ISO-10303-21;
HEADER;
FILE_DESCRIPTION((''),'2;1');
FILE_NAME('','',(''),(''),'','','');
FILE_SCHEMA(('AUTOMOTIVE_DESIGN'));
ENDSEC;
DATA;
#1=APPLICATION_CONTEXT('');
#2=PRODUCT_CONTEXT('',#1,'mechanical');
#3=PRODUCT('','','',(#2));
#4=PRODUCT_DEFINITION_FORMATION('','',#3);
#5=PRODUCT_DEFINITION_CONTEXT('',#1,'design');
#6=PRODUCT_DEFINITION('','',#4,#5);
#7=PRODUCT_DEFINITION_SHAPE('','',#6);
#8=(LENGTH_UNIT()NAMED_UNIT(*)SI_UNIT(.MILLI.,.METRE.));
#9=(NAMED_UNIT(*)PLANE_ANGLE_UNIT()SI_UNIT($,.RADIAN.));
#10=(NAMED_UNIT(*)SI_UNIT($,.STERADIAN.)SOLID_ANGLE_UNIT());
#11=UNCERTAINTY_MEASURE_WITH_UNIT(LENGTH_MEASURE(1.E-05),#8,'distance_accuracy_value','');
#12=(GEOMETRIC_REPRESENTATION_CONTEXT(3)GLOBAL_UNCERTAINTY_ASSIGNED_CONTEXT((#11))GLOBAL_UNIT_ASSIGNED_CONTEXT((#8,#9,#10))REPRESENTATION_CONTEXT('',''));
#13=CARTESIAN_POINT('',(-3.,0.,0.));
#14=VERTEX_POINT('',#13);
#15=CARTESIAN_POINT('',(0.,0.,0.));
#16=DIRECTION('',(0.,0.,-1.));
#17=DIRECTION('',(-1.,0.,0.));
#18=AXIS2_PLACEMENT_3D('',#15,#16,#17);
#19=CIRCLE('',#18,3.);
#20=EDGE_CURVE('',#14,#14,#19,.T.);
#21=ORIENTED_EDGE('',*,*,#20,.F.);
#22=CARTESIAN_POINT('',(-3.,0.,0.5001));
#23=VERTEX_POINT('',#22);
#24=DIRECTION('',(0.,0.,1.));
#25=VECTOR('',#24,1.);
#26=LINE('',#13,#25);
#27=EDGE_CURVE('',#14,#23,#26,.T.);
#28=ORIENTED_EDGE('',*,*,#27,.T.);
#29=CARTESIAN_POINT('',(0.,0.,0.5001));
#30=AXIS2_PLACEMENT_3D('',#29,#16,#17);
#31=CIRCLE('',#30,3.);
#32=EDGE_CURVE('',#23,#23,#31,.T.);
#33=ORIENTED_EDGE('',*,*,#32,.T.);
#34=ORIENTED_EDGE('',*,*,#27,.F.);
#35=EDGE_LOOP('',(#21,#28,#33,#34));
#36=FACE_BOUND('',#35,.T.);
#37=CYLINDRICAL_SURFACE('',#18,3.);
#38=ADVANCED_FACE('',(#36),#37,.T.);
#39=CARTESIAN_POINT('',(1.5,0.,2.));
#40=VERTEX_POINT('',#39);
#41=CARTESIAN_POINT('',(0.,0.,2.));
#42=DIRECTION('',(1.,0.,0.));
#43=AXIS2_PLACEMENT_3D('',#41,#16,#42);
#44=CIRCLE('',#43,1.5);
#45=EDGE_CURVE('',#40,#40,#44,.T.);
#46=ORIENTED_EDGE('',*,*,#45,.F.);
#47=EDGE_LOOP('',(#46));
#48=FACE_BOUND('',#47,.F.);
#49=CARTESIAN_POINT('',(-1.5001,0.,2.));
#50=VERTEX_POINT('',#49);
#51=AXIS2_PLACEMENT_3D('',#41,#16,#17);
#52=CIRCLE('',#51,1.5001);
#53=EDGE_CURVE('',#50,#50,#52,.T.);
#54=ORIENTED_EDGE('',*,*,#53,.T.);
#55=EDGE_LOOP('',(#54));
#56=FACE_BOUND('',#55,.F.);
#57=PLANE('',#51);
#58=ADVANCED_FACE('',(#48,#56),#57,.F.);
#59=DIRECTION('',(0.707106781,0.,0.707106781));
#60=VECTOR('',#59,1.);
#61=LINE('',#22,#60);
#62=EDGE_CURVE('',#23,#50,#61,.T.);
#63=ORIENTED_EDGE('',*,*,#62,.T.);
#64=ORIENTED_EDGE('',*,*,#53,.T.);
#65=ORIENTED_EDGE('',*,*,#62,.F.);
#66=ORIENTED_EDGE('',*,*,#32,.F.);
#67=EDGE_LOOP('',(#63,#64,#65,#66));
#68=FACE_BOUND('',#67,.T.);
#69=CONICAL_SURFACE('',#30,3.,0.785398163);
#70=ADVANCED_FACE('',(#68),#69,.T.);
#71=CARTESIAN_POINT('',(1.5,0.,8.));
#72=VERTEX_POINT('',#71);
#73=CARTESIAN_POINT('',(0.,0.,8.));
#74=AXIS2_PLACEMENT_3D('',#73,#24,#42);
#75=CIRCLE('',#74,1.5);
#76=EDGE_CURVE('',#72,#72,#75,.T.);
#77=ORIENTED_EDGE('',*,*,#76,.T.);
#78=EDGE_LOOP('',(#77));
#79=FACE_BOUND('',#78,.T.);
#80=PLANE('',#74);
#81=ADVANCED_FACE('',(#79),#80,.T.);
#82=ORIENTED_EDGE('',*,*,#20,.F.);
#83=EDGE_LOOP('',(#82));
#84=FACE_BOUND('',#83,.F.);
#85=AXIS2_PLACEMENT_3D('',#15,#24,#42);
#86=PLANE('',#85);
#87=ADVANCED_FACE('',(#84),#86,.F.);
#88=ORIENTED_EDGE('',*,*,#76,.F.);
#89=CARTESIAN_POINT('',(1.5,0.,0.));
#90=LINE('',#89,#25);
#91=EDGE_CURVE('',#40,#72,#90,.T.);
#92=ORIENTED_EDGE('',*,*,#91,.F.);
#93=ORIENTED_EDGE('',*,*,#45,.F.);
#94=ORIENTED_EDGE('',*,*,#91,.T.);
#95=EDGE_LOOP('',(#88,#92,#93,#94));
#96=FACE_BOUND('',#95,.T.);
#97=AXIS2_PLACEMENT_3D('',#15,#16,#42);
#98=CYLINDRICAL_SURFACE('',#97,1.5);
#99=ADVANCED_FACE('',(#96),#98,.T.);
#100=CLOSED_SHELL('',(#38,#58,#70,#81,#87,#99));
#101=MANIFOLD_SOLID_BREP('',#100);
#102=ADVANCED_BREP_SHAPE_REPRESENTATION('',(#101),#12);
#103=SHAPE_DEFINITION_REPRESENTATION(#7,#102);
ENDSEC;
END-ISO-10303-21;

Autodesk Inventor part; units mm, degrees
ref_plane "YZ Plane" through (0, 0, 0) normal (1, 0, 0) x (0, 1, 0)
ref_plane "XZ Plane" through (0, 0, 0) normal (0, 1, 0) x (-1, 0, 0)
ref_plane "XY Plane" through (0, 0, 0) normal (0, 0, 1) x (1, 0, 0)
sketch "スケッチ1" plane through (0, 0, 0) normal (0, 0, 1) x (1, 0, 0)
  circle A0 centre (0, 0) radius 1.5
  dimension "d0" = 3
extrude "押し出し1" add sketch "スケッチ1" along normal blind 8
sketch "スケッチ2" plane through (0, 0, 0) normal (0, 0, -1) x (-1, 0, 0)
  circle A0 centre (0, 0) radius 3
  dimension "d3" = 6
extrude "押し出し2" add sketch "スケッチ2" against normal blind 2
thread "ねじ1" size "M3x0.5" class "6g" standard "ANSI Metric M Profile" full length
chamfer "面取り1" distance 1.5 angle 45 1 edges at (3, 0, 2)
properties part number "ネジ皿m3,08" material "鋼、高強度、低合金"
